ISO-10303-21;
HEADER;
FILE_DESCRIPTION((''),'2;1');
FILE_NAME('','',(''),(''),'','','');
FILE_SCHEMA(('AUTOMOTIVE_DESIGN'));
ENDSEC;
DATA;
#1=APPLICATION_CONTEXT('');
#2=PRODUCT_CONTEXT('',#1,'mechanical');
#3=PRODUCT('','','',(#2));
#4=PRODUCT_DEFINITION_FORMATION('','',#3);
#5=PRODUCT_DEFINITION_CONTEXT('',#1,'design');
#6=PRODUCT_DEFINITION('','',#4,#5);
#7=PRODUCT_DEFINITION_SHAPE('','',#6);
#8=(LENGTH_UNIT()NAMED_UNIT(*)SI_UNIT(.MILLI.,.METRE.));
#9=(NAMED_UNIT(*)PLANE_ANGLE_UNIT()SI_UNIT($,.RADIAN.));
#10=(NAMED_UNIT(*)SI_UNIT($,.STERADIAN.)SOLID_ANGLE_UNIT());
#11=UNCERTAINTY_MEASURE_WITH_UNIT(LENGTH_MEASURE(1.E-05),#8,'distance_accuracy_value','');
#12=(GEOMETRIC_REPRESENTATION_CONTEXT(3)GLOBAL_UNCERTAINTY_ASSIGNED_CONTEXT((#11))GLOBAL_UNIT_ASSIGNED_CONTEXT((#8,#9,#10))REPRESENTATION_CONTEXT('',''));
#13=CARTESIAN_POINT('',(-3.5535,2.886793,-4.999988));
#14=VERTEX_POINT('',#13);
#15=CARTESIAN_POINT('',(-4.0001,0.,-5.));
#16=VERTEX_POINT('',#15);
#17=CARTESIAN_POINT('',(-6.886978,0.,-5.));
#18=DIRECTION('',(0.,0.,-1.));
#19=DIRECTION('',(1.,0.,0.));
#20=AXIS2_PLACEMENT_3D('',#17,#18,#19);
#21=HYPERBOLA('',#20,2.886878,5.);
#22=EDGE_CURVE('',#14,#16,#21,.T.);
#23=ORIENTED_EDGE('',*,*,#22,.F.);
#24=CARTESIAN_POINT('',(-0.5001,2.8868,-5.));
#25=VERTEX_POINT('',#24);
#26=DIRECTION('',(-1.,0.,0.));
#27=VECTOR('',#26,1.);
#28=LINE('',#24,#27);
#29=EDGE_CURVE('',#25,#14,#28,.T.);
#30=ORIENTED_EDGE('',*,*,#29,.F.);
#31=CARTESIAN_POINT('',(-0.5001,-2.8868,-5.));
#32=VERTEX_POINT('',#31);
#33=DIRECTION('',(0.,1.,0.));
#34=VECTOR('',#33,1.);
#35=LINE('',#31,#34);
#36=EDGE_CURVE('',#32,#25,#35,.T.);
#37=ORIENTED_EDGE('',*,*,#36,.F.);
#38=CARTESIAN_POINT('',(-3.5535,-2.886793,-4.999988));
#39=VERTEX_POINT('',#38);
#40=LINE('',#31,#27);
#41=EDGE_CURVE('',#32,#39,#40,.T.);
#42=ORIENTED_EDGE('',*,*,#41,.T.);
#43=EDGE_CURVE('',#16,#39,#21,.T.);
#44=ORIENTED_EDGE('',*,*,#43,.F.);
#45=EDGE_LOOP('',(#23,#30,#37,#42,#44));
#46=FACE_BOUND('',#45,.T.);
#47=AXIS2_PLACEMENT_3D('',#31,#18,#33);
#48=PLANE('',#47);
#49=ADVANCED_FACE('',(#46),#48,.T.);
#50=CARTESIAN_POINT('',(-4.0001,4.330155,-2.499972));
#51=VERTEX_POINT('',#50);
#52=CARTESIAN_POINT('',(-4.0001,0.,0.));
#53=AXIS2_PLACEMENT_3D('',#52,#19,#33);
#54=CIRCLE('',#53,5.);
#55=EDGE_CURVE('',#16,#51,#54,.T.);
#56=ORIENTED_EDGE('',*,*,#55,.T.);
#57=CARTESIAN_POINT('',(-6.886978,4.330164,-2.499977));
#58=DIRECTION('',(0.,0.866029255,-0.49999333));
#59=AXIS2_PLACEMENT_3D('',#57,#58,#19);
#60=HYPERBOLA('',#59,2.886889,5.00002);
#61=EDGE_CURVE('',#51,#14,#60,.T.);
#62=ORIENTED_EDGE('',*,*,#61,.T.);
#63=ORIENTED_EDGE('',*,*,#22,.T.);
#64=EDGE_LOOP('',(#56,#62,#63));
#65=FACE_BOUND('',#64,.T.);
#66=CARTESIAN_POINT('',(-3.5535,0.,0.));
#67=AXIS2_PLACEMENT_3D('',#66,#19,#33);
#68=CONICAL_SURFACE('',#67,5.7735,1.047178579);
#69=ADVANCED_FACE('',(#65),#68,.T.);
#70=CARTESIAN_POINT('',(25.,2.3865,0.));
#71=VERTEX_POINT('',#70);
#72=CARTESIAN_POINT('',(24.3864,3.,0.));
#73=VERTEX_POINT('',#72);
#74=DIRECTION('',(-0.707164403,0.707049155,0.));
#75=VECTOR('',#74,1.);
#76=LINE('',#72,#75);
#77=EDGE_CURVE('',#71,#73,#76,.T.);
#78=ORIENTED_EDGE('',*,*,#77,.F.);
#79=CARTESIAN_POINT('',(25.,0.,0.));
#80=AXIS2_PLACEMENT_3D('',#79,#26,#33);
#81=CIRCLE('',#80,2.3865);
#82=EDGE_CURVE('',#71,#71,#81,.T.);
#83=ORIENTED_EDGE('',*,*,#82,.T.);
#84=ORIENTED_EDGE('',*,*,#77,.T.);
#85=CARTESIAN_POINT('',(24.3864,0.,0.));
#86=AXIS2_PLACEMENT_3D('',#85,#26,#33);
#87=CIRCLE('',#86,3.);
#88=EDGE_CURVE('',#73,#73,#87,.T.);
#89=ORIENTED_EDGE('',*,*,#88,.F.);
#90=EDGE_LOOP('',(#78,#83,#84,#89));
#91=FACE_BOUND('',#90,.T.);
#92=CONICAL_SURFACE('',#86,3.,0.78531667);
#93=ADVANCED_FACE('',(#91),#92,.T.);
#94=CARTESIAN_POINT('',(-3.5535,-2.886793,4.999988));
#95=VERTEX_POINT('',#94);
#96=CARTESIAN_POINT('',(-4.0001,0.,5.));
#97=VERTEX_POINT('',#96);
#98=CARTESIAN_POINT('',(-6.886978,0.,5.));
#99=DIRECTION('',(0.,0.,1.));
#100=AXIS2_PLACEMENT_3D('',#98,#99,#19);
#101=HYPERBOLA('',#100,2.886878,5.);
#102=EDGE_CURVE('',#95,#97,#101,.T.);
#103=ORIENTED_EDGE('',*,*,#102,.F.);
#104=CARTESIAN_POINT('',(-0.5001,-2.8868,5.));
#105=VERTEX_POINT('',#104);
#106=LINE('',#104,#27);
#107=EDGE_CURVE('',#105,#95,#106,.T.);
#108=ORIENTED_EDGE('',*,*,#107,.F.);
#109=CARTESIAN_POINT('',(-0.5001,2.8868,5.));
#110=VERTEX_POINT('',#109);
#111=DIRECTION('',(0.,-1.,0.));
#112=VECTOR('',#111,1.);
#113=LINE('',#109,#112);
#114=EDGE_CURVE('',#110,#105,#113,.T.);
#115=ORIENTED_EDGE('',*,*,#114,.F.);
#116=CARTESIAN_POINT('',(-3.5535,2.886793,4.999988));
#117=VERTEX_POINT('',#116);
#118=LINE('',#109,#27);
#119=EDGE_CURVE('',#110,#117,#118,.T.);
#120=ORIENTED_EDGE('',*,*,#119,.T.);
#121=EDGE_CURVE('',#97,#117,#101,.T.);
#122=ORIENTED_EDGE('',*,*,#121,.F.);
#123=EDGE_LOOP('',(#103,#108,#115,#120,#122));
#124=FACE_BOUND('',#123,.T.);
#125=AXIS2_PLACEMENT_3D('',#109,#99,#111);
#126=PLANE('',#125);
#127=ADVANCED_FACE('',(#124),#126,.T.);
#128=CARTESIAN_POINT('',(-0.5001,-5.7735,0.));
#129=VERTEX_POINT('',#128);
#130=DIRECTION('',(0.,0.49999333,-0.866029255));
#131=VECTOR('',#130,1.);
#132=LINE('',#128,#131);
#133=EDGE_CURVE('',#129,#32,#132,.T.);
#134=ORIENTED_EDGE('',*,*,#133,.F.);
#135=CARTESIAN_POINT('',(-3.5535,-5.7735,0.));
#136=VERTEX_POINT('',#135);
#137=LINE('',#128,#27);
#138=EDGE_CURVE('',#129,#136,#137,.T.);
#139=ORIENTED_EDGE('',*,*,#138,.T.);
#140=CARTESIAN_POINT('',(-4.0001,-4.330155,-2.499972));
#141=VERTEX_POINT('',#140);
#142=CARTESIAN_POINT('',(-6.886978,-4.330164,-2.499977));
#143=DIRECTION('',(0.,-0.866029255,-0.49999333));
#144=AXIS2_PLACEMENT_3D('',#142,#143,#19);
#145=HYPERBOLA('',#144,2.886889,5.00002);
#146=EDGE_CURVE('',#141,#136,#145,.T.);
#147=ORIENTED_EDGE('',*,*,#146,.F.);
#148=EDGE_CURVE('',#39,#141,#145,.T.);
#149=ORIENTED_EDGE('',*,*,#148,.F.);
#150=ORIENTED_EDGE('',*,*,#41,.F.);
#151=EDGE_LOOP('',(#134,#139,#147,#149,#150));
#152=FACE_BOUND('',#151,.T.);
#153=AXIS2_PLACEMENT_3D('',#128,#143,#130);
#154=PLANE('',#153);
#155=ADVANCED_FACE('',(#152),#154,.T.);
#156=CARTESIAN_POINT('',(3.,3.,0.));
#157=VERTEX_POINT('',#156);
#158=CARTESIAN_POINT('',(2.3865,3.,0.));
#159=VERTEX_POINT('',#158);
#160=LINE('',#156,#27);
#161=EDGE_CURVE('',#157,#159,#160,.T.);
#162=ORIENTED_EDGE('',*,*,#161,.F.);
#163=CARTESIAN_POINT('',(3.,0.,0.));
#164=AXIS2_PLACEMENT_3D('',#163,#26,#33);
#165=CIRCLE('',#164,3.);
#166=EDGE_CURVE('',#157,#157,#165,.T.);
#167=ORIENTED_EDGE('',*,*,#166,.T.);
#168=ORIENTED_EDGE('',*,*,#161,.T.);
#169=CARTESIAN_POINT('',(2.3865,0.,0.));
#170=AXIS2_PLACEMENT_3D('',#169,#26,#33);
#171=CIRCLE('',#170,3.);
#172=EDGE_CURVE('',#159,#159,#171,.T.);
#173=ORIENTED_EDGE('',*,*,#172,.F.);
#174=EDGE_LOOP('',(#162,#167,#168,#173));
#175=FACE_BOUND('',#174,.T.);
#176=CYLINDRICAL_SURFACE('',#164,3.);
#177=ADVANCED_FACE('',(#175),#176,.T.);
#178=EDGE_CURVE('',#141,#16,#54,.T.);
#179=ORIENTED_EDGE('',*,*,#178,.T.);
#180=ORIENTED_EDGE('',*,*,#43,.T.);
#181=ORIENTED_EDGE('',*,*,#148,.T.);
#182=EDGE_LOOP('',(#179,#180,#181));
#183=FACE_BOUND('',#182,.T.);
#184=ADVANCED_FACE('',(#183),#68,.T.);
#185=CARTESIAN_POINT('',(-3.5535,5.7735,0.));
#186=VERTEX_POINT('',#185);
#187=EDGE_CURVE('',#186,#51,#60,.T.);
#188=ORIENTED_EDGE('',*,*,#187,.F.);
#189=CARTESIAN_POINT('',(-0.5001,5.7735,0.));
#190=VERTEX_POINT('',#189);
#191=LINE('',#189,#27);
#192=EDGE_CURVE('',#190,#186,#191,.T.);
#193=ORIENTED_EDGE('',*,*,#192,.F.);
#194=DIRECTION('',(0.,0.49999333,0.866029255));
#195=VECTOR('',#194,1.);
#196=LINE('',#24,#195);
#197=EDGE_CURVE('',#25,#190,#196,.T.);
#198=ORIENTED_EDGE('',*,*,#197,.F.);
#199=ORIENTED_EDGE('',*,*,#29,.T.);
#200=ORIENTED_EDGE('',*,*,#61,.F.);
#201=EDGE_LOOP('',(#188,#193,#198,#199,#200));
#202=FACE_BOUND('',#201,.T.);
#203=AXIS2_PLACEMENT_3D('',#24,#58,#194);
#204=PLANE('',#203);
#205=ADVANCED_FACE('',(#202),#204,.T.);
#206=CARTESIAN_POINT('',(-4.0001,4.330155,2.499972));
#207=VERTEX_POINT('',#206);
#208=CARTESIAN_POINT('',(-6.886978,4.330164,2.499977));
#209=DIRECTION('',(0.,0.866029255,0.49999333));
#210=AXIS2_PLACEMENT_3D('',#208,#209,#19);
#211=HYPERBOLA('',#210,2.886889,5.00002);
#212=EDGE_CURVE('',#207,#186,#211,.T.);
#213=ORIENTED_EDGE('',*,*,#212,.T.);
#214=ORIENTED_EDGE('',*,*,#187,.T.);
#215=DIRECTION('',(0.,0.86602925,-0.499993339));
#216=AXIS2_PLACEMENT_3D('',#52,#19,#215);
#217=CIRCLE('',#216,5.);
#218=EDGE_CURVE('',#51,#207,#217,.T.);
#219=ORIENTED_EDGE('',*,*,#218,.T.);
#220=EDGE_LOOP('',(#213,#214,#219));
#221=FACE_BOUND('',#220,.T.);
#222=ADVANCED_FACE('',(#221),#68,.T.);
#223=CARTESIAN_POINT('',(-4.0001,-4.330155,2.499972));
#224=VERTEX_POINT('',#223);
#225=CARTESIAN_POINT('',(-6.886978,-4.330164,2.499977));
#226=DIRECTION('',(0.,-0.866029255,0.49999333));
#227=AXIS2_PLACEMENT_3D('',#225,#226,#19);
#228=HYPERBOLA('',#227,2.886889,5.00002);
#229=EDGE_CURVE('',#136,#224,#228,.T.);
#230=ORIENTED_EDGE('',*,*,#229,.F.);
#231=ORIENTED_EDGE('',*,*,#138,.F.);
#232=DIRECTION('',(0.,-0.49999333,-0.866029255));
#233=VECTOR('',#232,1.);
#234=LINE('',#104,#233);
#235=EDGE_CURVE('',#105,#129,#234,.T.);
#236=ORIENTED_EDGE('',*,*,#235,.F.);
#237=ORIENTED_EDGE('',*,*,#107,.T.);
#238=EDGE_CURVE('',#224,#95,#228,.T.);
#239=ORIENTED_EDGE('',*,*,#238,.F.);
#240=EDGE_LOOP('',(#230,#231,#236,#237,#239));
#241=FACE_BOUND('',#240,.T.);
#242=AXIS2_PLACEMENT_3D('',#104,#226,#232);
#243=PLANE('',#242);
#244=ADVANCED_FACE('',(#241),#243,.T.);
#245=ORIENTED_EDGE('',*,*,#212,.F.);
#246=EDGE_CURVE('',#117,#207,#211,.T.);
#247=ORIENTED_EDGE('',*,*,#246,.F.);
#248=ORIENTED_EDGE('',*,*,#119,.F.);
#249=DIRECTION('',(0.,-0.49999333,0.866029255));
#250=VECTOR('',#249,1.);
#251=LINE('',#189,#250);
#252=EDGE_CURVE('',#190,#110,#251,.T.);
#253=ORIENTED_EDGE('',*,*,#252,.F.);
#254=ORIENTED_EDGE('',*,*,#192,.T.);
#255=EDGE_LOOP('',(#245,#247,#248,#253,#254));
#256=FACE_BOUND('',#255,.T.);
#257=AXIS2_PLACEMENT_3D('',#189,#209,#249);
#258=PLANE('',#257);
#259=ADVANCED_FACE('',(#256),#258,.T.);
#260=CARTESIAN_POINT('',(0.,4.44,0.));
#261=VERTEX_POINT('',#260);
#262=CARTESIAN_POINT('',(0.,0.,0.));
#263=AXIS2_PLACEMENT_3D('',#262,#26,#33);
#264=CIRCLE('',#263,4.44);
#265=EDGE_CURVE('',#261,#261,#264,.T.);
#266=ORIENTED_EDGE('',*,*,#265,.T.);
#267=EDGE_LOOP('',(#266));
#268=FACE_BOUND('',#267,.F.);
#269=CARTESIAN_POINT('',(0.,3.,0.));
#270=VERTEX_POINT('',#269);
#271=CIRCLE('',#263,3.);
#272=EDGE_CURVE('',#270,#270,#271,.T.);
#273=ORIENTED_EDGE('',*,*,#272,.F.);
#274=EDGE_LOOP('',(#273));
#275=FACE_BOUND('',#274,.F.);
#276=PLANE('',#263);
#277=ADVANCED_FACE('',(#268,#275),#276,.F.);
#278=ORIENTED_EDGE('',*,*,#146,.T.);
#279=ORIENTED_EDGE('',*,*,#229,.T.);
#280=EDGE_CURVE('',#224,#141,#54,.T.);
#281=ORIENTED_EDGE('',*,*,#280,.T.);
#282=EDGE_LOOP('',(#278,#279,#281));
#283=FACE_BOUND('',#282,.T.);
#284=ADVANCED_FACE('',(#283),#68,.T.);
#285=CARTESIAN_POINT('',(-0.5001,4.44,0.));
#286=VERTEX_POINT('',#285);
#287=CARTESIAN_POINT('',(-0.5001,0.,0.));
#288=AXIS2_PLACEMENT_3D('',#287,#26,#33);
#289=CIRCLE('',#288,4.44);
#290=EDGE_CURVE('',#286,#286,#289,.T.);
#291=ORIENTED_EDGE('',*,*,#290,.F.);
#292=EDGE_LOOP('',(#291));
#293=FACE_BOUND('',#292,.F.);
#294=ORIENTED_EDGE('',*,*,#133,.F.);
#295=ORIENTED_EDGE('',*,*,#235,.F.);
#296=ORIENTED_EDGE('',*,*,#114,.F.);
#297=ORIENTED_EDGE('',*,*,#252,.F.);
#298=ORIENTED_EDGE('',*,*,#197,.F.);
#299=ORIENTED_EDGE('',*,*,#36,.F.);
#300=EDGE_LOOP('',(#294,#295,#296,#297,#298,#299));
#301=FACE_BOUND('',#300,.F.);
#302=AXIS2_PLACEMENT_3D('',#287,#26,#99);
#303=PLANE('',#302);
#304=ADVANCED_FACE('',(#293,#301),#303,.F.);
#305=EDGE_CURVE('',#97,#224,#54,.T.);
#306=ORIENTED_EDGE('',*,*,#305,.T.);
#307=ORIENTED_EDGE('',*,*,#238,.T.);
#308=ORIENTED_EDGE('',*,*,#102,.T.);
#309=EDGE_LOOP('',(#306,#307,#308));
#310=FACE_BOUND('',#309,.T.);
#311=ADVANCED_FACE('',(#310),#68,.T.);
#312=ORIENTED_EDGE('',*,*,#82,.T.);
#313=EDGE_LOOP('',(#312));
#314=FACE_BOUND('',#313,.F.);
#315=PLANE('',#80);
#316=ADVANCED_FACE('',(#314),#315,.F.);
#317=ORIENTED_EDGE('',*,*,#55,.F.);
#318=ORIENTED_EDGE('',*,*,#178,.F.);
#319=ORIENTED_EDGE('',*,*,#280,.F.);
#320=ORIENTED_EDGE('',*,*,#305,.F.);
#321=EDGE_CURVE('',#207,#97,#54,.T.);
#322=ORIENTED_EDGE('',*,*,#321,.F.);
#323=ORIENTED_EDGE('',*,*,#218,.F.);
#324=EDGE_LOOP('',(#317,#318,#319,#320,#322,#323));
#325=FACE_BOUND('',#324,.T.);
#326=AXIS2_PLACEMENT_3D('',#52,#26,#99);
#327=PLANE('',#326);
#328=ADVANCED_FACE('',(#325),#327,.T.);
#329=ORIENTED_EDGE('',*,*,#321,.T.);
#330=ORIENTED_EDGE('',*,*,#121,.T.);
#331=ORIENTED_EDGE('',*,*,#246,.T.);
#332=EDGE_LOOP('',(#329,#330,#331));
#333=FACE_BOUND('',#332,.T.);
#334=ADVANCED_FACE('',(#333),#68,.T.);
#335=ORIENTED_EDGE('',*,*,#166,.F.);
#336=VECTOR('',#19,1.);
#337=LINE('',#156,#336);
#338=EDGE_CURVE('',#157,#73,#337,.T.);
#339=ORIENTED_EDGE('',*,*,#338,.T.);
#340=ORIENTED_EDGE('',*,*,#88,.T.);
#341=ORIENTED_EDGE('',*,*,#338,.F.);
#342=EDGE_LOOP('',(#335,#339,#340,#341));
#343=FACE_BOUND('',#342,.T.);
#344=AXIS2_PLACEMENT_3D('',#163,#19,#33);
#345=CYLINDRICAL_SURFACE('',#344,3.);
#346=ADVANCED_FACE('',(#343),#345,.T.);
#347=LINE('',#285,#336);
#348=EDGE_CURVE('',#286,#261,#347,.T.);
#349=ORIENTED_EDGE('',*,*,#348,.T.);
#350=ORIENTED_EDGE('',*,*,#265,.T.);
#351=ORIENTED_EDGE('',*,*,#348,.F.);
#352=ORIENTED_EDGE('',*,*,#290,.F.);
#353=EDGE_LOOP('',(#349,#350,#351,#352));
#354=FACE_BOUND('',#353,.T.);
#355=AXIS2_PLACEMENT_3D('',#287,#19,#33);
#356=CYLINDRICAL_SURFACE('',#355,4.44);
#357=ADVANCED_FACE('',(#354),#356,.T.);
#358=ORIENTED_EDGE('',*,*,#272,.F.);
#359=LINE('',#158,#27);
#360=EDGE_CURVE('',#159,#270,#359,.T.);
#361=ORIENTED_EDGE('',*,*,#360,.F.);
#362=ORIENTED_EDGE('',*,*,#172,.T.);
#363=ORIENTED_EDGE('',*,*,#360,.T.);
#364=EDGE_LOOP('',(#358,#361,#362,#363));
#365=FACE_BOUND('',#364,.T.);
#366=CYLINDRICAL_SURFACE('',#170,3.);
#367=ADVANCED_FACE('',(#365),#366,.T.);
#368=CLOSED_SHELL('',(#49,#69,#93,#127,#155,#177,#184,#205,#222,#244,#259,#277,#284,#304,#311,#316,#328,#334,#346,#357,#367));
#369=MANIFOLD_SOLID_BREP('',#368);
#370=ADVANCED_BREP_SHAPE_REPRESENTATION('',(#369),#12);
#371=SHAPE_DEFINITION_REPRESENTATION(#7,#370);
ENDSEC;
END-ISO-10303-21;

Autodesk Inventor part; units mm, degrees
ref_plane "YZ Plane" through (0, 0, 0) normal (1, 0, 0) x (0, 1, 0)
ref_plane "XZ Plane" through (0, 0, 0) normal (0, 1, 0) x (-1, 0, 0)
sketch "Sketch1" plane through (0, 0, 0) normal (0, 0, 1) x (1, 0, 0)
  line L0 (0, 4.44) -> (0, 3)
  line L1 (3, 3) -> (25, 3)
  line L2 (25, 3) -> (25, 0)
  line L3 (25, 0) -> (-0.5001, 0)
  line L4 (-5.6001, 0) -> (30.1, 0) projected
  line L5 (-0.5001, 0) -> (-0.5001, 4.44)
  line L6 (-0.5001, 4.44) -> (0, 4.44)
  line L7 (3, 3) -> (2.3865, 3)
  line L8 (2.3865, 3) -> (0, 3)
  line L9 (0, -0.888) -> (0, 5.328) projected
  dimension "d0" = 25
  dimension "d1" = 22
  dimension "d2" = 6
  dimension "d9" = 0.5001
  dimension "d10" = 8.88
  dimension "d13" = 0.6136
  dimension "d14" = 6
revolve "Body" add sketch "Sketch1" angle 360 about axis through (25, 0, 0) along (-1, 0, 0)
sketch "Sketch2" plane through (-0.5001, 0, 0) normal (-1, 0, 0) x (0, 0, 1)
  line L0 (0, 5.7735) -> (5, 2.8868)
  line L1 (5, 2.8868) -> (5, -2.8868)
  line L2 (5, -2.8868) -> (0, -5.7735)
  line L3 (0, -5.7735) -> (-5, -2.8868)
  line L4 (-5, -2.8868) -> (-5, 2.8868)
  line L5 (-5, 2.8868) -> (0, 5.7735)
  point P0 (0, 0)
  point P1 (0, 0)
  dimension "d11" = 10
extrude "Head" add sketch "Sketch2" along normal blind 3.5
sketch "Sketch4" plane through (0, 0, 0) normal (0, 0, 1) x (1, 0, 0)
  line L0 (-4.0001, 5) -> (-4.0001, 5.7735)
  line L1 (-4.0001, 5.7735) -> (-3.5535, 5.7735)
  line L2 (-3.5535, 5.7735) -> (-4.0001, 5)
  line L3 (-4.7001, 0) -> (0.1999, 0) projected
  line L4 (-0.5001, 5.7735) -> (-4.0001, 5.7735) projected
  line L5 (-4.0001, 2.8868) -> (-4.0001, 5.7735) projected
  dimension "d5" = 30
  dimension "d19" = 10
revolve "Chamfer1" cut sketch "Sketch4" angle 360 about axis through (-10, 0, 0) along (1, 0, 0)
thread "Thread" size "M6x1" class "6g" standard "ISO Metric profile" length 22
chamfer "Chamfer2" distance 0.6135 distance2 0.6136 1 edges at (25, -3, 0) measured on face at (25, 0.7776, 0.4238)
ref_plane "Work Plane1" through (1.525, 0, 0) normal (0, 0, 1) x (1, 0, 0)
equation "\"d0\" = NLG"
equation "\"d1\" = GEL"
equation "\"d2\" = GD"
equation "\"d10\" = SD2"
equation "\"d14\" = BDM"
equation "\"d11\" = SW"
equation "\"d3\" = KOH - SD"
equation "\"d5\" = ANG1"
equation "\"d19\" = SW0"
equation "\"d15\" = GEL"
equation "\"d6\" = -0.5 * SPD + 0.5 * GD"
equation "\"NLG\" = 25"
equation "\"GD\" = NND"
equation "\"BDM\" = NND"
equation "\"KOH\" = 4"
equation "\"GEL\" = 22"
equation "\"SW\" = 10"
equation "\"SW0\" = SW"
equation "\"SPD\" = NND - 1.2269 * PTC"
equation "\"SD2\" = 8.88"
equation "\"SD\" = 0.5"
equation "\"ANG1\" = 30deg"
equation "\"GAL\" = 0.61345 * PTC"
equation "\"GUL\" = 0.61345 * PTC"
equation "\"RR\" = 0.25"
equation "\"GD1\" = THREADDIA - 1.2269 * PTC"
equation "\"THREADDIA\" = 6"
equation "\"SDH\" = SD2"
equation "\"SDHG\" = 3"
equation "\"TOA\" = 30deg"
equation "\"PTC\" = 1"
equation "\"NND\" = 6"
equation "\"E0\" = 11.55"
properties part number "ISO 4017 - M6 x 25" material "Stainless Steel, 440C"
